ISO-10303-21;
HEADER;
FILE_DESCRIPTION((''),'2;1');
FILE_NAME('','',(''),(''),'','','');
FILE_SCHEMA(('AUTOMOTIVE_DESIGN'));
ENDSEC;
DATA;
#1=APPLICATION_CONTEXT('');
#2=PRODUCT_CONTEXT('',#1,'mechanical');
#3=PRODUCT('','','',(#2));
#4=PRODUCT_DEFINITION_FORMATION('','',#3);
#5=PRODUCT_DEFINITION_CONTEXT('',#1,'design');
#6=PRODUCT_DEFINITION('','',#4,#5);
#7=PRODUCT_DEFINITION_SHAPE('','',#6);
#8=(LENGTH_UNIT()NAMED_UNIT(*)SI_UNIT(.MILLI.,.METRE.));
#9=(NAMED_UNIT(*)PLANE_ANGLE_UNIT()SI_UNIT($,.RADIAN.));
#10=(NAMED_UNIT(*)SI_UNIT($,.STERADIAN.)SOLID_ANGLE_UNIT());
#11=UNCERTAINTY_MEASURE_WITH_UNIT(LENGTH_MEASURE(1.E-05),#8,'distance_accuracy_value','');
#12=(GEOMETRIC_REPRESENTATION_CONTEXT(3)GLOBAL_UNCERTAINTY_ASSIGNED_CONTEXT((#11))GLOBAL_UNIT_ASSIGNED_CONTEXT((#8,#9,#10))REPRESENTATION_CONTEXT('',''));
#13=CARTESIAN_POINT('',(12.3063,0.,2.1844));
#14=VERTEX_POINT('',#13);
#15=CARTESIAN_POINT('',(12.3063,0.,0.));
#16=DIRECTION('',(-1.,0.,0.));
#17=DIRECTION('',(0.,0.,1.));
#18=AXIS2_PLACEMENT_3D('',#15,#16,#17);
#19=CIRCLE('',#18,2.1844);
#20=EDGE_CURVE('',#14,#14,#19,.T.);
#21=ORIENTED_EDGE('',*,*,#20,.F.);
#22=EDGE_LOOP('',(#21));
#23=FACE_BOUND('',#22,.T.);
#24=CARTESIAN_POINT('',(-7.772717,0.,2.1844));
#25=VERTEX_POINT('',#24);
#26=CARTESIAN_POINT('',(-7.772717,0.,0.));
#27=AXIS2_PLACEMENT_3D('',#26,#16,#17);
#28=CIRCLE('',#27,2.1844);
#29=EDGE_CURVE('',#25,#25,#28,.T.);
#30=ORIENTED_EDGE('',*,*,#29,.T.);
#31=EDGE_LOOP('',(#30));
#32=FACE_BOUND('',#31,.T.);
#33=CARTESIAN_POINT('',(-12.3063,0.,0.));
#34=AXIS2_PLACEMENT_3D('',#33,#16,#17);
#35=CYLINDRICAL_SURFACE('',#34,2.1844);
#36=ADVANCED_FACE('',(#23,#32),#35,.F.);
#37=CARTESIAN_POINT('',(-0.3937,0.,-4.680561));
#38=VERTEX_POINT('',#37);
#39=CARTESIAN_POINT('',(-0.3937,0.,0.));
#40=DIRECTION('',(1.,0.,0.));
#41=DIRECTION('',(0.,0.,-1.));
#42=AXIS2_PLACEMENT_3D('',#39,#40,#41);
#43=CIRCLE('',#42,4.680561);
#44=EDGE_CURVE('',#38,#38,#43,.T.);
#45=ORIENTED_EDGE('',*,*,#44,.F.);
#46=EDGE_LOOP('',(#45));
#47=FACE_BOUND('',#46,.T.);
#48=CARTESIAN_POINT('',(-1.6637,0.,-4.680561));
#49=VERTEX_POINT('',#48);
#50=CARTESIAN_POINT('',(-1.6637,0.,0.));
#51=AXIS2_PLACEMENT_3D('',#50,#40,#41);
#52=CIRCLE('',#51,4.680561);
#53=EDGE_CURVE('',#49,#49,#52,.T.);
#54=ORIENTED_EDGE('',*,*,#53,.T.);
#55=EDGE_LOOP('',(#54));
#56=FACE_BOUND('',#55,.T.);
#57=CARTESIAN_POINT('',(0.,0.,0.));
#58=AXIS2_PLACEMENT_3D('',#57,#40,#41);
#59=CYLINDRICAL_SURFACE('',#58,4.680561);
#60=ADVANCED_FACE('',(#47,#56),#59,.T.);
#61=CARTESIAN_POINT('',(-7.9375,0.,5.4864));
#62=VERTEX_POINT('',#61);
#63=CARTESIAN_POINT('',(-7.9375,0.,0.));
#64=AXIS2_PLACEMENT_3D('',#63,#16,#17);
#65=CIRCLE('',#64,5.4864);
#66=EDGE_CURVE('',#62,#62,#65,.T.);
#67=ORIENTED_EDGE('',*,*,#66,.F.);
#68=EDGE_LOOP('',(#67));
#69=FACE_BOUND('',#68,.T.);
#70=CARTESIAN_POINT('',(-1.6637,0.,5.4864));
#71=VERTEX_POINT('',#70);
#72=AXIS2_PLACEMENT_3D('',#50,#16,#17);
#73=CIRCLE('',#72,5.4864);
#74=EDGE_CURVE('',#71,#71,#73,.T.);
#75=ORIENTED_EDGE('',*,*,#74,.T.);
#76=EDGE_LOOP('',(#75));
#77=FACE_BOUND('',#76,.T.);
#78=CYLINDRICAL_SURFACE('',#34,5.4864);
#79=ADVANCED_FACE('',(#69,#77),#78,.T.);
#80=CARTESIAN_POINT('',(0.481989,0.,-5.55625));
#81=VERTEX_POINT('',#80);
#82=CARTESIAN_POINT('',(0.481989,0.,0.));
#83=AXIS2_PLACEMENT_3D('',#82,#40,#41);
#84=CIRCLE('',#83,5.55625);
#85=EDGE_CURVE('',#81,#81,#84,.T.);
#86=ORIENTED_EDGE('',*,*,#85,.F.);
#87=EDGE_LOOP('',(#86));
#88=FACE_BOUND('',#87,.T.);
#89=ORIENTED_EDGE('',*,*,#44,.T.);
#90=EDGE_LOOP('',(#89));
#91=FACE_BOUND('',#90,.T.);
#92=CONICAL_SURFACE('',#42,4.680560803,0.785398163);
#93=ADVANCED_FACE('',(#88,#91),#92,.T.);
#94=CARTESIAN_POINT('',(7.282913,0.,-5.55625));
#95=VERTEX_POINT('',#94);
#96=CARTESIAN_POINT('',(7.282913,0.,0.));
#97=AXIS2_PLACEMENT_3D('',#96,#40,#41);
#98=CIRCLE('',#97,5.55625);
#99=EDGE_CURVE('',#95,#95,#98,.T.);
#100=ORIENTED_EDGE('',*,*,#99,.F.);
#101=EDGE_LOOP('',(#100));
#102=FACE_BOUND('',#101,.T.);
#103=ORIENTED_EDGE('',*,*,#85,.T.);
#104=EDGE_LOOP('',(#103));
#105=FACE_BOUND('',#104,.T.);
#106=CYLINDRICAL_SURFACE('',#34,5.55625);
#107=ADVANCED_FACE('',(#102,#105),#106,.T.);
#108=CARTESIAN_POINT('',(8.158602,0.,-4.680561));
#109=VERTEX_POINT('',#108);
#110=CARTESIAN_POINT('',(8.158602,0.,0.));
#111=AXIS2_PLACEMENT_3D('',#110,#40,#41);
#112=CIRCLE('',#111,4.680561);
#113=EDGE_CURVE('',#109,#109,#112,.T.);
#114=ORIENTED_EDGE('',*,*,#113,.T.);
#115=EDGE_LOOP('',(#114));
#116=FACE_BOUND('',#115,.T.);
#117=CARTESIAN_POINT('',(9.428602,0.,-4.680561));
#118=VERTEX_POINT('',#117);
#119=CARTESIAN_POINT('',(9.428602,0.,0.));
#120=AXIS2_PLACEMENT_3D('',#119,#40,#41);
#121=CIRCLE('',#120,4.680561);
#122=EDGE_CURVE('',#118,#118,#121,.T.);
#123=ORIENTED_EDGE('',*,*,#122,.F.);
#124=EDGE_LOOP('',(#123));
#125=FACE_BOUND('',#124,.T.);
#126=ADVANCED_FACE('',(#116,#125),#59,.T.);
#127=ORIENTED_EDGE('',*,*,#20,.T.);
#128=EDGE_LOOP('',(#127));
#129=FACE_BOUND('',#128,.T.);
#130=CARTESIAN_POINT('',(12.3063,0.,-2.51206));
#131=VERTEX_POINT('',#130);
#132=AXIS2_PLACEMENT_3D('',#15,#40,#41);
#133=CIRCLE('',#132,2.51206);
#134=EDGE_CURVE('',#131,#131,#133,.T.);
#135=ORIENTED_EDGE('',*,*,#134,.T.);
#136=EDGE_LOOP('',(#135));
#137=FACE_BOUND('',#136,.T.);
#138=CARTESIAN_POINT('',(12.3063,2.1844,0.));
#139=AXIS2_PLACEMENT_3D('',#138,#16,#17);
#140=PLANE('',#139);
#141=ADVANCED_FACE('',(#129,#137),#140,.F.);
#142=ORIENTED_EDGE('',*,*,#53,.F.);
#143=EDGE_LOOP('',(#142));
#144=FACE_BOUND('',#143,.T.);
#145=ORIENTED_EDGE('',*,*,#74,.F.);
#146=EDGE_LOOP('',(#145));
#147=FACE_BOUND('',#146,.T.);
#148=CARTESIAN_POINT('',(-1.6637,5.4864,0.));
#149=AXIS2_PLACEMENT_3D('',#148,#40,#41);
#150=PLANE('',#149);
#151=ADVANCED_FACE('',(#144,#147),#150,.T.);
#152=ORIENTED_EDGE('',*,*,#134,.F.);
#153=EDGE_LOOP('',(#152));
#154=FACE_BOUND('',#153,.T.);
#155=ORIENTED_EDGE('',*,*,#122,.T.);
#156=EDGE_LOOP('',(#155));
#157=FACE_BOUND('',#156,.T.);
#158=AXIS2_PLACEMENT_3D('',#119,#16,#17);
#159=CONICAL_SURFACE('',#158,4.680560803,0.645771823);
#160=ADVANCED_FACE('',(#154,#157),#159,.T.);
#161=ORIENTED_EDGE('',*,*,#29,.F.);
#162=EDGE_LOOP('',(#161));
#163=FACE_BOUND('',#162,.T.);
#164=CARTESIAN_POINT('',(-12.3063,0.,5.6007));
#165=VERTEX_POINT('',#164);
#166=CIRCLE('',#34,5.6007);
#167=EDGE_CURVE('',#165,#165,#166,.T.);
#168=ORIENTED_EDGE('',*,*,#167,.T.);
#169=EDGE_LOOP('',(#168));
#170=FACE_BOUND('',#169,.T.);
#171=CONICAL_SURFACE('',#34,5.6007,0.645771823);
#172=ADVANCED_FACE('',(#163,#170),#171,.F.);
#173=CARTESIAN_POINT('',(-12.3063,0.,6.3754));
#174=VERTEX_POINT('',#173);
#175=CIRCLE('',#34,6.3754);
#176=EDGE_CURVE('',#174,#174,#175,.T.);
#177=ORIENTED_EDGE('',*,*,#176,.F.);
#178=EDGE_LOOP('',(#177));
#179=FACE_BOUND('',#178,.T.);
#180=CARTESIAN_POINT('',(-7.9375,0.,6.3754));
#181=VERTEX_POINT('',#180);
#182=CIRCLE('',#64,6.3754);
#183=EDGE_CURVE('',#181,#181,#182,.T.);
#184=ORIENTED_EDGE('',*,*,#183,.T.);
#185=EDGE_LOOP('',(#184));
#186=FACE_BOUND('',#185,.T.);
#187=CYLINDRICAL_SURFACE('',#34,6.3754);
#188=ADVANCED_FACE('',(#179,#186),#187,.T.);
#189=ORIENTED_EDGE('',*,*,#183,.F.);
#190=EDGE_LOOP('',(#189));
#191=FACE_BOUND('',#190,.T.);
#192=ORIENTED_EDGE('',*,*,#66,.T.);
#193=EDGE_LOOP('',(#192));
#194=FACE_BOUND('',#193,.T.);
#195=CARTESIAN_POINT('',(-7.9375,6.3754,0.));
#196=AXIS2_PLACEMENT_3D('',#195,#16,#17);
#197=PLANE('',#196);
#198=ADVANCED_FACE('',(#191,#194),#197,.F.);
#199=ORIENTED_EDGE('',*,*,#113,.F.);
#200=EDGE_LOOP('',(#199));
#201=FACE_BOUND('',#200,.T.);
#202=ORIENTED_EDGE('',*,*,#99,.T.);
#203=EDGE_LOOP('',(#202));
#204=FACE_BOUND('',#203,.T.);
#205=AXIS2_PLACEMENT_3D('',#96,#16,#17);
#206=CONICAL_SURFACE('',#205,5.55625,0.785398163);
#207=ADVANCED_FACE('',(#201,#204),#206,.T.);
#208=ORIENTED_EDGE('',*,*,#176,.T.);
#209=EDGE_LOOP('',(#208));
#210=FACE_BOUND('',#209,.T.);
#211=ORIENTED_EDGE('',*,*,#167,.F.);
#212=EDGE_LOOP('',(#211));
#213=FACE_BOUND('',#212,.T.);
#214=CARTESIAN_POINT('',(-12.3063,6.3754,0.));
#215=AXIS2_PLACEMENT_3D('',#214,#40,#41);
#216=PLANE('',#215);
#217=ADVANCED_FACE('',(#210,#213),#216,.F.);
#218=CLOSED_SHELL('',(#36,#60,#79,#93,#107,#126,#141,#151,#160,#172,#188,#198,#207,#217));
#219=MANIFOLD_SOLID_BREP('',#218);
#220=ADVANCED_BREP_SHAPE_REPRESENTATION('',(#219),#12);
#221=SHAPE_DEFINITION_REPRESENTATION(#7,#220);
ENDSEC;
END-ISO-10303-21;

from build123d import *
from build123d.topology import SkipClean

# Parameters (mm, degrees)
CUT_SWEEP1_PITCH = 1.27


with BuildPart() as part:
    # Sketch1 → Revolve1 (revolve)
    with BuildSketch(Plane.XY, mode=Mode.PRIVATE) as revolve1_sk:
        Polygon((-12.3063, 6.3754), (-12.3063, 5.6007), (-7.772716776, 2.1844), (12.3063, 2.1844), (12.3063, 2.51206), (12.3063, 5.55625), (8.266523424, 5.55625), (-1.6637, 5.55625), (-1.6637, 5.4864), (-7.9375, 5.4864), (-7.9375, 6.3754), align=None)
    revolve(revolve1_sk.sketch.rotate(Axis((-12.3063, 0, 0), (1, 0, 0)), 90), axis=Axis((-12.3063, 0, 0), (1, 0, 0)))

    # Cut-Sweep1: the profile of Sketch4 profile screwed along a right-hand helix of 11 turns, 8 arcs to a turn; built about Z, then put on its axis
    cut_sweep1_z = Axis((0, 0, 0), (0, 0, 1))
    cut_sweep1_corners = [(5.55655, 0, 0.000173205), (5.55655, 0, -1.111423205), (4.731360803, 0, -0.635), (4.731360803, 0, -0.47625)]
    with BuildLine(mode=Mode.PRIVATE) as cut_sweep1_profile:
        Line(cut_sweep1_corners[0], cut_sweep1_corners[1])
        Line(cut_sweep1_corners[1], cut_sweep1_corners[2])
        Line(cut_sweep1_corners[2], cut_sweep1_corners[3])
        Line(cut_sweep1_corners[3], cut_sweep1_corners[0])
    cut_sweep1_cap = Face(cut_sweep1_profile.wire())
    cut_sweep1_turn_angles = [0, 22.5, 45, 67.5, 90, 112.5, 135, 157.5, 180, 202.5, 225, 247.5, 270, 292.5, 315, 337.5, 360]
    cut_sweep1_turn_weights = [1, 0.9238795325112867, 1, 0.9238795325112867, 1, 0.9238795325112867, 1, 0.9238795325112867, 1, 0.9238795325112867, 1, 0.9238795325112867, 1, 0.9238795325112867, 1, 0.9238795325112867, 1]
    cut_sweep1_turn_rails = [Edge.make_bspline([Vector(p[0], p[1], 0).rotate(cut_sweep1_z, cut_sweep1_turn_angles[k]) / cut_sweep1_turn_weights[k] + Vector(0, 0, p[2] + CUT_SWEEP1_PITCH * cut_sweep1_turn_angles[k] / 360) for k in range(17)], [0, 0, 0, 1, 1, 2, 2, 3, 3, 4, 4, 5, 5, 6, 6, 7, 7, 8, 8, 8], 2, cut_sweep1_turn_weights) for p in cut_sweep1_corners]
    cut_sweep1_turn_sides = [Face.make_surface_from_curves(cut_sweep1_turn_rails[p[0]], cut_sweep1_turn_rails[p[1]]) for p in [(0, 1), (1, 2), (2, 3), (3, 0)]]
    cut_sweep1_turn = Solid(Shell([*cut_sweep1_turn_sides, cut_sweep1_cap, cut_sweep1_cap.rotate(cut_sweep1_z, 360).moved(Location((0, 0, CUT_SWEEP1_PITCH * 360 / 360)))]))
    cut_sweep1_each = [*[cut_sweep1_turn.moved(Location((0, 0, CUT_SWEEP1_PITCH * i))) for i in range(11)]]
    add(Plane(origin=(12.3063, 0, 0), x_dir=(0, 1, 0), z_dir=(-1, 0, 0)) * Compound([cut_sweep1_each[i] for i in range(0, 11, 2)]), mode=Mode.SUBTRACT)
    add(Plane(origin=(12.3063, 0, 0), x_dir=(0, 1, 0), z_dir=(-1, 0, 0)) * Compound([cut_sweep1_each[i] for i in range(1, 11, 2)]), mode=Mode.SUBTRACT)

    # Sketch5 → Cut-Revolve1 (revolve, cut)
    with BuildSketch(Plane.XY, mode=Mode.PRIVATE) as cut_revolve1_sk:
        Polygon((12.3063, 2.51206), (9.428602239, 4.680560803), (8.158602239, 4.680560803), (7.282913042, 5.55625), (12.3063, 5.55625), align=None)
        Polygon((-1.6637, 5.55625), (-1.6637, 4.680560803), (-0.3937, 4.680560803), (0.481989197, 5.55625), align=None)
    revolve(cut_revolve1_sk.sketch.rotate(Axis((0, 0, 0), (-1, 0, 0)), 90), axis=Axis((0, 0, 0), (-1, 0, 0)), mode=Mode.SUBTRACT)

    # Sketch6 → Revolve2 (revolve)
    with SkipClean():  # the faces are left unmerged after this step: merging them gives an invalid solid
        with BuildSketch(Plane.XY, mode=Mode.PRIVATE) as revolve2_sk:
            Polygon((-0.3937, 4.680560803), (8.158602239, 4.680560803), (7.282913042, 5.55625), (0.481989197, 5.55625), align=None)
        revolve(revolve2_sk.sketch.rotate(Axis((0, 0, 0), (-1, 0, 0)), 90), axis=Axis((0, 0, 0), (-1, 0, 0)))
    add(part.part.scale(1), mode=Mode.REPLACE)  # the faces are merged on a copy


solid = part.part
